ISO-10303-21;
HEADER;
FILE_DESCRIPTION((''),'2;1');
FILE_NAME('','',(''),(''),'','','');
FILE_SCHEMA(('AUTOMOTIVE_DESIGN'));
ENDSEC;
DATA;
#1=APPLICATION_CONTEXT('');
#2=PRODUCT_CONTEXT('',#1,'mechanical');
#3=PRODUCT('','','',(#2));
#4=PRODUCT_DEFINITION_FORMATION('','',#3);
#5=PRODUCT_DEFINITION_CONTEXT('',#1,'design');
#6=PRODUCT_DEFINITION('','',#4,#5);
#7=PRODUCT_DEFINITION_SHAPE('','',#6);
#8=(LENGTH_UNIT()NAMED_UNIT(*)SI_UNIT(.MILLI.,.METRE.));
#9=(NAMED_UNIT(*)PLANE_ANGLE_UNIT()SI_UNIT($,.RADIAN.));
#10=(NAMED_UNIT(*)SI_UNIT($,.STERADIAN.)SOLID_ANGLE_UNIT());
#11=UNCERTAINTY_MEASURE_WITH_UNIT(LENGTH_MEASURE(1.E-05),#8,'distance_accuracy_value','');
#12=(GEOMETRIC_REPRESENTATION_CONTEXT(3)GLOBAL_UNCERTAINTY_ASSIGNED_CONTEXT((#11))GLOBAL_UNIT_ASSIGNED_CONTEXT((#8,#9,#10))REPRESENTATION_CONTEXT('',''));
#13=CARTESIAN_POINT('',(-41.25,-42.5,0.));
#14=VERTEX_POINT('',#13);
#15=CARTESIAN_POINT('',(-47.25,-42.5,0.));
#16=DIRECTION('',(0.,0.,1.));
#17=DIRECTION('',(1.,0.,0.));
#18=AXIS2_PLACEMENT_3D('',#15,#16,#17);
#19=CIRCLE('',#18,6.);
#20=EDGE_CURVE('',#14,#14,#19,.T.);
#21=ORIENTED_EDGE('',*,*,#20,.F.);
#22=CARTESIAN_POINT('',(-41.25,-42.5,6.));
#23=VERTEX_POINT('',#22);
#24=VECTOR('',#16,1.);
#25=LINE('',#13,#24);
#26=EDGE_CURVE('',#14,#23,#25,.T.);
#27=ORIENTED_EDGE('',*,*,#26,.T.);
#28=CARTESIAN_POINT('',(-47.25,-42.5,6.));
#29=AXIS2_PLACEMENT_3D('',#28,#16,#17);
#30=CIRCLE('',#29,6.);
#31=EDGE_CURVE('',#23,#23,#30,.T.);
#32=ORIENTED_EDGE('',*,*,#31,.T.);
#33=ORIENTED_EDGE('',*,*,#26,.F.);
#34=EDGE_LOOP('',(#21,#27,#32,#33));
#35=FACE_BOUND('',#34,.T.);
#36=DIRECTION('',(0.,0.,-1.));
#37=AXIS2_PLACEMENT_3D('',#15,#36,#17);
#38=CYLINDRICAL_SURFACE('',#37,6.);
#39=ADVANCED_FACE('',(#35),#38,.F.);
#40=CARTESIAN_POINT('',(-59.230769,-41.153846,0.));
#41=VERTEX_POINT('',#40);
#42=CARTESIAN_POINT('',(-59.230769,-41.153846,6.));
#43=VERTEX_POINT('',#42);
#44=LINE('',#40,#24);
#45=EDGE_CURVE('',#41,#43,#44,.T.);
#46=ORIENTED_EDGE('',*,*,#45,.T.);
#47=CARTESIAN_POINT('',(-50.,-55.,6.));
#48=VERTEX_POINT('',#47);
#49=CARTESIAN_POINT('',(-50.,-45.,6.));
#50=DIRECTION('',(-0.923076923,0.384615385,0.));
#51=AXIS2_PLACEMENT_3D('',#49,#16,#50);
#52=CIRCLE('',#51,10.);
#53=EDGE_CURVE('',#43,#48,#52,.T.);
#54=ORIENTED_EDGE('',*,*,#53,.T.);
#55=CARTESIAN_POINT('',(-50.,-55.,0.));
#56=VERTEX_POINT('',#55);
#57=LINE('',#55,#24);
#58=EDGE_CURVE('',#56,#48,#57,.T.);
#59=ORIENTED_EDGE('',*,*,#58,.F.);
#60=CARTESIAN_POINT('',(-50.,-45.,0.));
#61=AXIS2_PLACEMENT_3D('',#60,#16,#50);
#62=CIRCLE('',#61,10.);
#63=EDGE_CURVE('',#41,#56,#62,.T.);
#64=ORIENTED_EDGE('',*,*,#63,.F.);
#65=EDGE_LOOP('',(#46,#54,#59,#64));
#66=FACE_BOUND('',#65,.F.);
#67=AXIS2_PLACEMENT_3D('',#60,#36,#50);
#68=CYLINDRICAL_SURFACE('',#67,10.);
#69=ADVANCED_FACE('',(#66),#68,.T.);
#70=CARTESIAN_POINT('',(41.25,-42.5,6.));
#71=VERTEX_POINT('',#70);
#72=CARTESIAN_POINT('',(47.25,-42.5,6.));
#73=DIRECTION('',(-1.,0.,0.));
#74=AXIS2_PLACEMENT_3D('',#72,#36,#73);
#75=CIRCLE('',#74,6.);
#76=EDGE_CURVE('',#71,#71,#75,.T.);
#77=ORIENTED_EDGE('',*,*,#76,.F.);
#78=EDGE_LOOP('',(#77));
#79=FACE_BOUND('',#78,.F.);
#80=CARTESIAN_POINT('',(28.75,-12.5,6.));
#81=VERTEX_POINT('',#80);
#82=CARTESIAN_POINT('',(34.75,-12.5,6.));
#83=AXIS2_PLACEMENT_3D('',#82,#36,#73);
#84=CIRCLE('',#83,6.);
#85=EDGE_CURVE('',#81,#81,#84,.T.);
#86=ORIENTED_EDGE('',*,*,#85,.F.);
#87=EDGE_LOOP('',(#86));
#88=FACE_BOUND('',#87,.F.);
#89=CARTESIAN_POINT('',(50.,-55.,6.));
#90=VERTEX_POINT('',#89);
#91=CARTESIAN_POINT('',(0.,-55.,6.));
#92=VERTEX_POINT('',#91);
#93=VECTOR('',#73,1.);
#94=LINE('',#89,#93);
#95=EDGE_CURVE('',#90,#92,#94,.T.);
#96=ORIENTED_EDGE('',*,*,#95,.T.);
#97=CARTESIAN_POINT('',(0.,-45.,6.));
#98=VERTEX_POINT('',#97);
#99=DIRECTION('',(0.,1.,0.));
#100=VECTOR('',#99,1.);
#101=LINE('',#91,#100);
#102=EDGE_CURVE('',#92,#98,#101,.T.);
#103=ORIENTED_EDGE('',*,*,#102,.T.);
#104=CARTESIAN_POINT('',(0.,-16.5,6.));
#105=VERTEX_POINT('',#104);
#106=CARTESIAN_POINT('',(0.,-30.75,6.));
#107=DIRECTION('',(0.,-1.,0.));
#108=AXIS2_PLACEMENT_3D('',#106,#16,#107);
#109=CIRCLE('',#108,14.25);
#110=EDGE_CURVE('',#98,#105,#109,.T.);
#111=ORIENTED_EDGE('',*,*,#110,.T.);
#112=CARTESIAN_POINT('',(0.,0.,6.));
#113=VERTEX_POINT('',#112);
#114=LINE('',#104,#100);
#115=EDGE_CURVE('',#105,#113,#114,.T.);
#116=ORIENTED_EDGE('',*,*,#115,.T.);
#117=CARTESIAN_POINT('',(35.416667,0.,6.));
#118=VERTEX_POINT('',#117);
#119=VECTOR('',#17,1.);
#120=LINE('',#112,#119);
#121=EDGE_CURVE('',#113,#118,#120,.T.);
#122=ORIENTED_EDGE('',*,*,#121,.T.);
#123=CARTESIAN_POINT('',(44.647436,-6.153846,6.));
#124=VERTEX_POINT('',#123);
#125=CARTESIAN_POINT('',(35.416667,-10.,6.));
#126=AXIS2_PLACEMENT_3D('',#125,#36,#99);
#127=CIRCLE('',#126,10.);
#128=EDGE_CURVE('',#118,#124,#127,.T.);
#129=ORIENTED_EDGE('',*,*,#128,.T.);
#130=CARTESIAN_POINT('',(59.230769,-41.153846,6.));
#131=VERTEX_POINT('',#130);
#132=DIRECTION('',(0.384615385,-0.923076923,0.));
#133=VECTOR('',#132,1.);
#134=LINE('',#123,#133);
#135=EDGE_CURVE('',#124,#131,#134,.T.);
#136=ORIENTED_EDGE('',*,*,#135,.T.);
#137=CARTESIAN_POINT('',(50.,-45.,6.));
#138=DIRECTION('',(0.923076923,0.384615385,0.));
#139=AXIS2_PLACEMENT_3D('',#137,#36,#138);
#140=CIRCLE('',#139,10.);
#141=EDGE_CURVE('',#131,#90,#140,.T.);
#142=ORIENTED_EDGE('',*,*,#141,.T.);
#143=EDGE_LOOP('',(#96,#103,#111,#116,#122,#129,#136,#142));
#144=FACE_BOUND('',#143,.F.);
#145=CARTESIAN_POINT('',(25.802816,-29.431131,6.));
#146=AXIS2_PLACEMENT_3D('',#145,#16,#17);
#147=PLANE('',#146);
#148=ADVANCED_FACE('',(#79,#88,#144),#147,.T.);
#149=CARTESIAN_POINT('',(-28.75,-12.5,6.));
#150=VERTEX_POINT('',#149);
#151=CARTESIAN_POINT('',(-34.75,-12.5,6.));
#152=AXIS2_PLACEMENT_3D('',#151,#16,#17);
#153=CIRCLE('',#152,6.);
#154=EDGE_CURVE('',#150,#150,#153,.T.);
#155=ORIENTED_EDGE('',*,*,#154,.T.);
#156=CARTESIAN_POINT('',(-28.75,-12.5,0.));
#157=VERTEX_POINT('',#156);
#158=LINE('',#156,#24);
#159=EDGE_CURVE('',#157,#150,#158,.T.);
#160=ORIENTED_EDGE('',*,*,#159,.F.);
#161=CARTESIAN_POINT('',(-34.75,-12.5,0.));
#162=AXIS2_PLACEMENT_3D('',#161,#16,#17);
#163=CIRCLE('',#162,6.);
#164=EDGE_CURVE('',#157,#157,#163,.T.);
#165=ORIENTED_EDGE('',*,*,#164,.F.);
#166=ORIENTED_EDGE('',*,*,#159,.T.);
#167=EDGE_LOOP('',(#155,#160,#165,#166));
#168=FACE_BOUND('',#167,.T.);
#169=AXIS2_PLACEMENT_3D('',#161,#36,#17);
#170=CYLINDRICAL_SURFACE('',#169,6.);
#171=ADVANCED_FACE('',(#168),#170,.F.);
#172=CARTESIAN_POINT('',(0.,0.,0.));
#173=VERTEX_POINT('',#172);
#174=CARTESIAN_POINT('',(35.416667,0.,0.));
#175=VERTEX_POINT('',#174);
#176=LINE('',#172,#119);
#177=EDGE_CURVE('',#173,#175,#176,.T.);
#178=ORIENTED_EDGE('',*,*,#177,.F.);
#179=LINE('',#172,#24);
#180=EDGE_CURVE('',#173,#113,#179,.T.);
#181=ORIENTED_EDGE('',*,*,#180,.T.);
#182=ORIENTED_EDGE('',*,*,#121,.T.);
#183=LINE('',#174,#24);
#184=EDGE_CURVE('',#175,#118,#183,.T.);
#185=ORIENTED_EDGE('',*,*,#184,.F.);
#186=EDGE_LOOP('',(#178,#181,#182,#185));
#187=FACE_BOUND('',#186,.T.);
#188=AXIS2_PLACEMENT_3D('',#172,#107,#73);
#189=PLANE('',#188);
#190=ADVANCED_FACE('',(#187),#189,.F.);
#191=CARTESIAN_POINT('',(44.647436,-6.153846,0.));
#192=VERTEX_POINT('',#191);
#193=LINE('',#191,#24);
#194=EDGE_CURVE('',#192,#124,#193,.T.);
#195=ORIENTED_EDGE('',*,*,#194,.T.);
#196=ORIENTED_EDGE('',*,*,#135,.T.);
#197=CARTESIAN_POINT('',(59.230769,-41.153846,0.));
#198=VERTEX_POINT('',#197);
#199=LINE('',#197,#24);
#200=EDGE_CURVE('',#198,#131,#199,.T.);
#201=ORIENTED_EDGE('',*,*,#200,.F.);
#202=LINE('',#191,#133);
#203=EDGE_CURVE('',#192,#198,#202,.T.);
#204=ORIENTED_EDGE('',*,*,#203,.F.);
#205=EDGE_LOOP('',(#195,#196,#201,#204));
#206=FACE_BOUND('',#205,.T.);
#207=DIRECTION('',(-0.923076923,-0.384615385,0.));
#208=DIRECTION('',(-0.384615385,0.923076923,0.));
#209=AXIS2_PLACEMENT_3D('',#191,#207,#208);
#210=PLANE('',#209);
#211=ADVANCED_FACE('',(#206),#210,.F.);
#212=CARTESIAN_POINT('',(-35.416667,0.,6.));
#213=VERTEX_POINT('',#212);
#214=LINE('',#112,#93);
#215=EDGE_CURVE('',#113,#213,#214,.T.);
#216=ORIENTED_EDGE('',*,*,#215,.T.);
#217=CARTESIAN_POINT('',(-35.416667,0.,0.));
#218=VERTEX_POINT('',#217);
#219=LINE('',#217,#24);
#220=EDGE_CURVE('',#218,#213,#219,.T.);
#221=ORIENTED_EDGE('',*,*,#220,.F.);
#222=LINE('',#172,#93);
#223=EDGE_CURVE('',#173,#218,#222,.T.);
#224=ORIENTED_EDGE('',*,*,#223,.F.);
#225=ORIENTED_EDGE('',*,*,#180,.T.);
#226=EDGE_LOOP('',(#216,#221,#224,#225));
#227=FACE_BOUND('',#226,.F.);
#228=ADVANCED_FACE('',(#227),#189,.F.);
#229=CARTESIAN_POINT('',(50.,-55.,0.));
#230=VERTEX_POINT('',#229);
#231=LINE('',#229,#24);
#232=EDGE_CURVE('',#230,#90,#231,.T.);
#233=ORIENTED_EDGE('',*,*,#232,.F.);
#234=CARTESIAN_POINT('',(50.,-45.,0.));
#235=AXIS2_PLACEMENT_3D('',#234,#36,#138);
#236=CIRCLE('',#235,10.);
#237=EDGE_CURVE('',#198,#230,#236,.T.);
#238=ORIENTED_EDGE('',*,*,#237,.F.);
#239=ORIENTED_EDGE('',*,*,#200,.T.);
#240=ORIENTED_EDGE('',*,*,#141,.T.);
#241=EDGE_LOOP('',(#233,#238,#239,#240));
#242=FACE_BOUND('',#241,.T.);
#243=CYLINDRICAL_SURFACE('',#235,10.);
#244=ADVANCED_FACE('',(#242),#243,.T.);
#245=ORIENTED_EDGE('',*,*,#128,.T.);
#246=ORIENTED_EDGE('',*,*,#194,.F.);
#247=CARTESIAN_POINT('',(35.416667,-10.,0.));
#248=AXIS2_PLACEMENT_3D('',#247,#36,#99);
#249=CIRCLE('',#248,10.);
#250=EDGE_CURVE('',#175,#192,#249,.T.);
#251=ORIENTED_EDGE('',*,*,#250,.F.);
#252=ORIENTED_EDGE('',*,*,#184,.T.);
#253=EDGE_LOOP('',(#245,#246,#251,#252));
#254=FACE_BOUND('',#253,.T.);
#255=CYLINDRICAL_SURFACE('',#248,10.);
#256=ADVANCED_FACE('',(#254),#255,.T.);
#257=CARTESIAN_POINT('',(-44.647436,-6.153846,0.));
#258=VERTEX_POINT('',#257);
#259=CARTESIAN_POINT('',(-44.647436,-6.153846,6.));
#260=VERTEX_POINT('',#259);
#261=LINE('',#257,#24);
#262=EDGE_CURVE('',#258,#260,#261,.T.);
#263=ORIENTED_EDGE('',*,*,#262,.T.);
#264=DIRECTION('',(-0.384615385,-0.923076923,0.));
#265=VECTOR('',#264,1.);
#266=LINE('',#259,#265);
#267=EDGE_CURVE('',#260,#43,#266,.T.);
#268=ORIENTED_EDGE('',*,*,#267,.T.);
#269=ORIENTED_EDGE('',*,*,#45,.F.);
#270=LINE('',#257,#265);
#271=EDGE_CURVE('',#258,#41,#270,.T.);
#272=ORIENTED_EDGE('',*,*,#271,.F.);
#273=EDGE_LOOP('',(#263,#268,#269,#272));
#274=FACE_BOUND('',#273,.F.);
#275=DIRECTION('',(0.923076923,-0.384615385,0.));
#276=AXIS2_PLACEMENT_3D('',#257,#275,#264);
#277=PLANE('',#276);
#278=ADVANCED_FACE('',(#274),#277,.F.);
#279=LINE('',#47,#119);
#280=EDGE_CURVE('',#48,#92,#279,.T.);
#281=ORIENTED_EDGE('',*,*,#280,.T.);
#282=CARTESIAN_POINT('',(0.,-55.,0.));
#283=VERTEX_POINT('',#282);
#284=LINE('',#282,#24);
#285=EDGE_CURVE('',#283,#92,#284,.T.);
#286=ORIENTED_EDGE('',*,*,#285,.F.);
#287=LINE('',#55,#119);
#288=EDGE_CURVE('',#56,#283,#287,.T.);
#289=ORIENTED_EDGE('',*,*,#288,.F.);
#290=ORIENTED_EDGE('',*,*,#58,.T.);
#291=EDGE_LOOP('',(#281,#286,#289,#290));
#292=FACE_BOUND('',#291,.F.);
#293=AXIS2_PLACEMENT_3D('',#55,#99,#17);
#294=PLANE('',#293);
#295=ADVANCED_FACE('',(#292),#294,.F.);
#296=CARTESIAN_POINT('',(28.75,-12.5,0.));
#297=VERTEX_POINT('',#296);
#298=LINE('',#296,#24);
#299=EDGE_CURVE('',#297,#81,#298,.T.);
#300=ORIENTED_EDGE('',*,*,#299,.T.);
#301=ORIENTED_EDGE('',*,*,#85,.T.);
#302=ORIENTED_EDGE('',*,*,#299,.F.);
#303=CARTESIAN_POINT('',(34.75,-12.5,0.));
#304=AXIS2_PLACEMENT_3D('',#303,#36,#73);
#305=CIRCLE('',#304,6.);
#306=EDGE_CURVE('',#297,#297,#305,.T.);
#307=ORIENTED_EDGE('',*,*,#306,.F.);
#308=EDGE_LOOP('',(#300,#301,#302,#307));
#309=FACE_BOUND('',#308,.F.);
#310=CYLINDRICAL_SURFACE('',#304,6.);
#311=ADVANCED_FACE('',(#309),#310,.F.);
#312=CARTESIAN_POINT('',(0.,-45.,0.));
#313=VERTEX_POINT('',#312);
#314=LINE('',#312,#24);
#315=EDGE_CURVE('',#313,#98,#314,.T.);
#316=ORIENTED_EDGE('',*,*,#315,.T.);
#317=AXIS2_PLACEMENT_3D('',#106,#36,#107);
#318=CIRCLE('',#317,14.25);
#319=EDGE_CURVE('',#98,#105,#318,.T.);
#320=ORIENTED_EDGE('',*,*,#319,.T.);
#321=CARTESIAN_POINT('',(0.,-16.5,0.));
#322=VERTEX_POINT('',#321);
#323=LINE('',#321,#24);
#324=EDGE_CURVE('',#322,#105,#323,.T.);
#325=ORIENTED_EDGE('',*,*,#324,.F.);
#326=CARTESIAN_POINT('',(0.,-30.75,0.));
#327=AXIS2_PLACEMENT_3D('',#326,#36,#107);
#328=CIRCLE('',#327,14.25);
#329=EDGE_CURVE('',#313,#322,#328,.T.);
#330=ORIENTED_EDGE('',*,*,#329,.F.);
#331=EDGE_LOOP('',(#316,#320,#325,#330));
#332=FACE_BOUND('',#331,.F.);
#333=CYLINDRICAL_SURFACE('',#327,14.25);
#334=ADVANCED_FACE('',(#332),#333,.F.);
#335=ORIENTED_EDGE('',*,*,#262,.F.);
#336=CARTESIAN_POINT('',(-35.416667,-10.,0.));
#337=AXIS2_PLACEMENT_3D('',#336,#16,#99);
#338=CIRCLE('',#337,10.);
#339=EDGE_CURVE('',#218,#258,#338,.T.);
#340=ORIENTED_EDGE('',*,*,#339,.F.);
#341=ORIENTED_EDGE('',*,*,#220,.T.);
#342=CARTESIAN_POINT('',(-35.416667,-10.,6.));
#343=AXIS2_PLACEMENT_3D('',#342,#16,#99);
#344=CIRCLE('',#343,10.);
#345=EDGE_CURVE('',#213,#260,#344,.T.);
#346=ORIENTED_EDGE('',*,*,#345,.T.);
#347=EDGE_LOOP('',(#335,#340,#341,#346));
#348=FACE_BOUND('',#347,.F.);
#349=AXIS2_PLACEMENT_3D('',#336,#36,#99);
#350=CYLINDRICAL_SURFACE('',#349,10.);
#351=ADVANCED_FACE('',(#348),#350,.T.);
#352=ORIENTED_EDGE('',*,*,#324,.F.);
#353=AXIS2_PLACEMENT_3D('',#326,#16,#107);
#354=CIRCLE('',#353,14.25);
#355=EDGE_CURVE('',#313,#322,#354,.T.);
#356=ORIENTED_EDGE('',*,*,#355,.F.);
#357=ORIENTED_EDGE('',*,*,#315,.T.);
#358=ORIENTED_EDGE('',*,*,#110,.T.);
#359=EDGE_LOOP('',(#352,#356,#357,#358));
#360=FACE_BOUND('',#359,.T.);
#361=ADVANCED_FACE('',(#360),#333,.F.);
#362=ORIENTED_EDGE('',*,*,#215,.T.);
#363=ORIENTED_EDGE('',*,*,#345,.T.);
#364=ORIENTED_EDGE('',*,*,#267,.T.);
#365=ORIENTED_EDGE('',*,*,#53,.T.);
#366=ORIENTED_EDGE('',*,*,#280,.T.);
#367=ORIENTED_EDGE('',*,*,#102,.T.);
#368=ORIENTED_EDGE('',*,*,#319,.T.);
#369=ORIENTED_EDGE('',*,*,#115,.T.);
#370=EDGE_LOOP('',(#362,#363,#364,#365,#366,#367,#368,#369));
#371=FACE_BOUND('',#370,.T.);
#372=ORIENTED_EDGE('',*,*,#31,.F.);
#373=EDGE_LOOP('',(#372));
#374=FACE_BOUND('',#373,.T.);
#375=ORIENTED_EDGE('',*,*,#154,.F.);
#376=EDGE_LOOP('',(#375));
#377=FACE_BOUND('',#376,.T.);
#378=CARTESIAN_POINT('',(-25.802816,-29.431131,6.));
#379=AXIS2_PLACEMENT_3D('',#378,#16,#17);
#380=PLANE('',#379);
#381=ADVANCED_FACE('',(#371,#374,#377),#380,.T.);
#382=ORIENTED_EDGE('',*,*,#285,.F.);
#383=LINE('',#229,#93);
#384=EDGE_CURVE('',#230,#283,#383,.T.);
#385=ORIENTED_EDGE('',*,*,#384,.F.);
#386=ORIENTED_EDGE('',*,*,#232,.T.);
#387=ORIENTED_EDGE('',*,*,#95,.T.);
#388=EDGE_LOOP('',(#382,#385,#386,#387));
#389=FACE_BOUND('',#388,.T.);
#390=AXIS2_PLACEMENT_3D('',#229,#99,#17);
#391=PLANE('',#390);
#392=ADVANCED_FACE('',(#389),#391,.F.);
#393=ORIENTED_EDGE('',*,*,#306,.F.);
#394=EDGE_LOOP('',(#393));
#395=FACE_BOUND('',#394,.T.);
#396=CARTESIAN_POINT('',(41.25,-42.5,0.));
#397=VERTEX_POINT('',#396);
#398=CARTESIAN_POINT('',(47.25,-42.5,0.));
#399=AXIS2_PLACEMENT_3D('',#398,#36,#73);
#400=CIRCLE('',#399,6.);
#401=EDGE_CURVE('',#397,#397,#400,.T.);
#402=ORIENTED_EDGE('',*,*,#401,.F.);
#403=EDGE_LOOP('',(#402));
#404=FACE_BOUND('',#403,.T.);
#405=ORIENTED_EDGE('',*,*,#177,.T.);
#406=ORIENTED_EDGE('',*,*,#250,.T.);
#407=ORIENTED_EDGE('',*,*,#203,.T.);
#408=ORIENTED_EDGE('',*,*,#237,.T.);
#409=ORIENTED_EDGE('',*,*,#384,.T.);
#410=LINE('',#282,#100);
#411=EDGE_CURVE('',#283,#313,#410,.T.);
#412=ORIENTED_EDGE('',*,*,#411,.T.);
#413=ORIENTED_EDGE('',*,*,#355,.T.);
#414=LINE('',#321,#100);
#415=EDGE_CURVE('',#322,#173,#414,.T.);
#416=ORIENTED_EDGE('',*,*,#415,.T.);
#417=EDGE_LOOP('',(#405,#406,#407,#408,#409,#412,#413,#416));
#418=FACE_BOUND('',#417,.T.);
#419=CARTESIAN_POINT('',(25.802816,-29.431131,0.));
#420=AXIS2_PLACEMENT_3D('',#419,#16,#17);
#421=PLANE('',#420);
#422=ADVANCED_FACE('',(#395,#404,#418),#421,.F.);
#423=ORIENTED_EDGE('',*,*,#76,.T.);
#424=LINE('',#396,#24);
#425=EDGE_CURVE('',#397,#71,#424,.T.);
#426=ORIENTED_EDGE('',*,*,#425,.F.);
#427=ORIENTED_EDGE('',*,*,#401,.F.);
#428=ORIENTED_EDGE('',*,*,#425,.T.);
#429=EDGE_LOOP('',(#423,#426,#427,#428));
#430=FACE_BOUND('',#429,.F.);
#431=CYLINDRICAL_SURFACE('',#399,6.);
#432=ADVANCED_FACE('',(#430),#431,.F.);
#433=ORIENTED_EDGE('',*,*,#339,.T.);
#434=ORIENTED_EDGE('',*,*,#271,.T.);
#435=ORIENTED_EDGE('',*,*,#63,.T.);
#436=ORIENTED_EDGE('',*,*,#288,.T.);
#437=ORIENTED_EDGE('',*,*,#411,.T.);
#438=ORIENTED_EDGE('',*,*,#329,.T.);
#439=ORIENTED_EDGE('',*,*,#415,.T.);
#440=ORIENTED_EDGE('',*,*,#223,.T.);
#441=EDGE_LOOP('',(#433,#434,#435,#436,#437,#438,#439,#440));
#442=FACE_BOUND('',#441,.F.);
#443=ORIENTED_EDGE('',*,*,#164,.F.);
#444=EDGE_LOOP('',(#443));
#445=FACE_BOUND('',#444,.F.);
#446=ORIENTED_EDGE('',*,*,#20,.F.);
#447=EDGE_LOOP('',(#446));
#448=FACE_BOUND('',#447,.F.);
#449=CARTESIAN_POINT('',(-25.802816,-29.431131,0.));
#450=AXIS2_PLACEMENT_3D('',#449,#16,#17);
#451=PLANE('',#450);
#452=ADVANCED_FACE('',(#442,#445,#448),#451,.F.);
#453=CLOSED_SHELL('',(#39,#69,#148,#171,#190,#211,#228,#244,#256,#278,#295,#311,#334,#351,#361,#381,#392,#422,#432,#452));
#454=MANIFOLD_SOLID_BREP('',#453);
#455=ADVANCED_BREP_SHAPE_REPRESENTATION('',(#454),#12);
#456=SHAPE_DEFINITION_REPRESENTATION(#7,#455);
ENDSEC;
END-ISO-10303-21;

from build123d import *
from build123d import SkipClean  # not in build123d's __all__

# Parameters (mm, degrees)
F0_R     = 6
F1_DEPTH = 6


with BuildPart() as f1:
    # F0 (on Top) → F1 (new body)
    with BuildSketch(Plane.XY):
        with BuildLine():
            Line((0, -16.5), (0, 0))
            Line((0, 0), (-35.4166666667, 0))
            ThreePointArc((-35.4166666667, 0), (-40.9636686289, -1.6794970566), (-44.6474358974, -6.1538461538))
            Line((-44.6474358974, -6.1538461538), (-59.2307692308, -41.1538461538))
            ThreePointArc((-59.2307692308, -41.1538461538), (-58.3205029434, -50.5470019623), (-50, -55))
            Line((-50, -55), (0, -55))
            Line((0, -55), (0, -45))
            ThreePointArc((0, -45), (-14.25, -30.75), (0, -16.5))
        make_face()
        with Locations((-47.25, -42.5)):
            Circle(F0_R, mode=Mode.SUBTRACT)
        with Locations((-34.75, -12.5)):
            Circle(F0_R, mode=Mode.SUBTRACT)
    extrude(amount=F1_DEPTH)

    # F2: F1 across plane


with BuildPart() as f1_1:
    add(f1.part, clean=False)
    with SkipClean():  # cleaning this boolean's faces spoils the solid; the shape is the same uncleaned
        add(f1.part.mirror(Plane.YZ), clean=False)


solid = f1_1.part
